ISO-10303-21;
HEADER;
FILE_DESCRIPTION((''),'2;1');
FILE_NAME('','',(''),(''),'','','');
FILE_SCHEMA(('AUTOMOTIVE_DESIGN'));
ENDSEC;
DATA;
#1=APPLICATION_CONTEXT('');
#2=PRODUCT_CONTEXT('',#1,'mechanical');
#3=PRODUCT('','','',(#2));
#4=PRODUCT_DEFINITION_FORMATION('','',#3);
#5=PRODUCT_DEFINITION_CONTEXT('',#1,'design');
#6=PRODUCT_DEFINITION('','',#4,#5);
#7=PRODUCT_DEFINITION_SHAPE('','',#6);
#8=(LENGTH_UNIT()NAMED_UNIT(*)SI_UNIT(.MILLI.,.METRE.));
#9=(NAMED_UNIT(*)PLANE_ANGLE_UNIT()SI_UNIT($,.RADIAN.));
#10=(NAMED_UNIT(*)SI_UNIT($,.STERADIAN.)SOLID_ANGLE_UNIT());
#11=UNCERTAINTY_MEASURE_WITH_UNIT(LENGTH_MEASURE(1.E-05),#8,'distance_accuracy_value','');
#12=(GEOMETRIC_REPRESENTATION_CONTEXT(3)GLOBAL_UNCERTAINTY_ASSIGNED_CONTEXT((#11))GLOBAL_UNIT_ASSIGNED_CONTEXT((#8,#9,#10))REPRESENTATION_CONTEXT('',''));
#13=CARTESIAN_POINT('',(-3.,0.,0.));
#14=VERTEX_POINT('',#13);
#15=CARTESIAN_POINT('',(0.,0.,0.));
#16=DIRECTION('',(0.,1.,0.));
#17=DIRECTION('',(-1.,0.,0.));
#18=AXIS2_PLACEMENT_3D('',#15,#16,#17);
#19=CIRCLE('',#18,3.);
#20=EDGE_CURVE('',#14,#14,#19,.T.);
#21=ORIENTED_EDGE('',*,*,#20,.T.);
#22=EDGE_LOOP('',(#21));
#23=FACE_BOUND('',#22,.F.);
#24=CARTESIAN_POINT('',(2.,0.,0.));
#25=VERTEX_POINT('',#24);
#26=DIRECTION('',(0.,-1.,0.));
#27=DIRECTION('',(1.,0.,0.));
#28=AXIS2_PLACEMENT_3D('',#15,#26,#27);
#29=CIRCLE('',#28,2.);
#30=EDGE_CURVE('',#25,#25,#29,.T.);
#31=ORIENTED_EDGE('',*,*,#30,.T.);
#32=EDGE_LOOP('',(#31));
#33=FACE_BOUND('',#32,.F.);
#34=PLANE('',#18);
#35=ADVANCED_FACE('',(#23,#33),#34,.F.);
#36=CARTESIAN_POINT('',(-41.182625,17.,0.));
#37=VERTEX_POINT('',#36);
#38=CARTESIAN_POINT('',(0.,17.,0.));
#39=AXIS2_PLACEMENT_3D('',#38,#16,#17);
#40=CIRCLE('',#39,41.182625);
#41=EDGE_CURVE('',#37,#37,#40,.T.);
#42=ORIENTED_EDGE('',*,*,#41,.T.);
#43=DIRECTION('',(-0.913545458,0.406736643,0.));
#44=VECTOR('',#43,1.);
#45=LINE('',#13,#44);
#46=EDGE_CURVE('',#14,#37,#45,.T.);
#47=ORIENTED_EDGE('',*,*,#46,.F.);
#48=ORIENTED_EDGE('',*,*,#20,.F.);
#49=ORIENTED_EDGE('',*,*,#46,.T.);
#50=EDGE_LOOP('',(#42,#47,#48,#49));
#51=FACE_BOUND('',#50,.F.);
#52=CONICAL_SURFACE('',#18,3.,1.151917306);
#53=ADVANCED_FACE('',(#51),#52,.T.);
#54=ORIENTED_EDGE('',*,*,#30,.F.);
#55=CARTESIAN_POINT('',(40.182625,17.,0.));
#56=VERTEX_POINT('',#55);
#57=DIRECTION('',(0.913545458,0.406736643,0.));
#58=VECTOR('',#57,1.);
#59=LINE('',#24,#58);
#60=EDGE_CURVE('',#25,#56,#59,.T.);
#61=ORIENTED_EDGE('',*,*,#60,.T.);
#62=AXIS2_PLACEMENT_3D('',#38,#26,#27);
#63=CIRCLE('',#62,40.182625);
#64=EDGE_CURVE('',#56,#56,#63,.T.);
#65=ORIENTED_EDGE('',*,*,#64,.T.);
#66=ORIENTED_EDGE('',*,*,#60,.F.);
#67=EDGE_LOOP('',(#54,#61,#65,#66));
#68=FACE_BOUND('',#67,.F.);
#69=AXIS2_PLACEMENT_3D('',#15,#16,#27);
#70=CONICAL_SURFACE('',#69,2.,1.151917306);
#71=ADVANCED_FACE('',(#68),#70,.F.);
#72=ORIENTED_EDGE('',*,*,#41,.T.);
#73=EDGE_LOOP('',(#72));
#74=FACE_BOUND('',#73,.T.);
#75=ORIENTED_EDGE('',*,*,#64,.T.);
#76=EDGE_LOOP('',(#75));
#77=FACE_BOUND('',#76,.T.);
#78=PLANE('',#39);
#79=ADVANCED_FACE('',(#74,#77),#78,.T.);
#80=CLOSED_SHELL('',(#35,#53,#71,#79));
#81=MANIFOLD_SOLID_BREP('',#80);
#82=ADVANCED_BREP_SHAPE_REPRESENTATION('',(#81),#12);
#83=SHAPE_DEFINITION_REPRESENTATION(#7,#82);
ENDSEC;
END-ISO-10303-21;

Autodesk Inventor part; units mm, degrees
ref_plane "YZ Plane" through (0, 0, 0) normal (1, 0, 0) x (0, 1, 0)
ref_plane "XZ Plane" through (0, 0, 0) normal (0, 1, 0) x (-1, 0, 0)
ref_plane "XY Plane" through (0, 0, 0) normal (0, 0, 1) x (1, 0, 0)
sketch "Szkic1" plane through (0, 0, 0) normal (0, 1, 0) x (-1, 0, 0)
  circle A0 centre (0, 0) radius 3
  circle A1 centre (0, 0) radius 20
  dimension "d0" = 6
  dimension "d1" = 40
extrude "Wyciągnięcie proste1" add sketch "Szkic1" along normal blind 17 draft 66 contours A0
sketch "Szkic2" plane through (0, 0, 0) normal (0, -1, 0) x (1, 0, 0)
  point P0 (0, 0)
sketch "Szkic3" plane through (0, 0, 0) normal (0, -1, 0) x (1, 0, 0)
  circle A0 centre (0, 0) radius 2
  dimension "d4" = 4
extrude "Wyciągnięcie proste2" cut sketch "Szkic3" against normal blind 17 draft 66
properties part number "lejek2"
